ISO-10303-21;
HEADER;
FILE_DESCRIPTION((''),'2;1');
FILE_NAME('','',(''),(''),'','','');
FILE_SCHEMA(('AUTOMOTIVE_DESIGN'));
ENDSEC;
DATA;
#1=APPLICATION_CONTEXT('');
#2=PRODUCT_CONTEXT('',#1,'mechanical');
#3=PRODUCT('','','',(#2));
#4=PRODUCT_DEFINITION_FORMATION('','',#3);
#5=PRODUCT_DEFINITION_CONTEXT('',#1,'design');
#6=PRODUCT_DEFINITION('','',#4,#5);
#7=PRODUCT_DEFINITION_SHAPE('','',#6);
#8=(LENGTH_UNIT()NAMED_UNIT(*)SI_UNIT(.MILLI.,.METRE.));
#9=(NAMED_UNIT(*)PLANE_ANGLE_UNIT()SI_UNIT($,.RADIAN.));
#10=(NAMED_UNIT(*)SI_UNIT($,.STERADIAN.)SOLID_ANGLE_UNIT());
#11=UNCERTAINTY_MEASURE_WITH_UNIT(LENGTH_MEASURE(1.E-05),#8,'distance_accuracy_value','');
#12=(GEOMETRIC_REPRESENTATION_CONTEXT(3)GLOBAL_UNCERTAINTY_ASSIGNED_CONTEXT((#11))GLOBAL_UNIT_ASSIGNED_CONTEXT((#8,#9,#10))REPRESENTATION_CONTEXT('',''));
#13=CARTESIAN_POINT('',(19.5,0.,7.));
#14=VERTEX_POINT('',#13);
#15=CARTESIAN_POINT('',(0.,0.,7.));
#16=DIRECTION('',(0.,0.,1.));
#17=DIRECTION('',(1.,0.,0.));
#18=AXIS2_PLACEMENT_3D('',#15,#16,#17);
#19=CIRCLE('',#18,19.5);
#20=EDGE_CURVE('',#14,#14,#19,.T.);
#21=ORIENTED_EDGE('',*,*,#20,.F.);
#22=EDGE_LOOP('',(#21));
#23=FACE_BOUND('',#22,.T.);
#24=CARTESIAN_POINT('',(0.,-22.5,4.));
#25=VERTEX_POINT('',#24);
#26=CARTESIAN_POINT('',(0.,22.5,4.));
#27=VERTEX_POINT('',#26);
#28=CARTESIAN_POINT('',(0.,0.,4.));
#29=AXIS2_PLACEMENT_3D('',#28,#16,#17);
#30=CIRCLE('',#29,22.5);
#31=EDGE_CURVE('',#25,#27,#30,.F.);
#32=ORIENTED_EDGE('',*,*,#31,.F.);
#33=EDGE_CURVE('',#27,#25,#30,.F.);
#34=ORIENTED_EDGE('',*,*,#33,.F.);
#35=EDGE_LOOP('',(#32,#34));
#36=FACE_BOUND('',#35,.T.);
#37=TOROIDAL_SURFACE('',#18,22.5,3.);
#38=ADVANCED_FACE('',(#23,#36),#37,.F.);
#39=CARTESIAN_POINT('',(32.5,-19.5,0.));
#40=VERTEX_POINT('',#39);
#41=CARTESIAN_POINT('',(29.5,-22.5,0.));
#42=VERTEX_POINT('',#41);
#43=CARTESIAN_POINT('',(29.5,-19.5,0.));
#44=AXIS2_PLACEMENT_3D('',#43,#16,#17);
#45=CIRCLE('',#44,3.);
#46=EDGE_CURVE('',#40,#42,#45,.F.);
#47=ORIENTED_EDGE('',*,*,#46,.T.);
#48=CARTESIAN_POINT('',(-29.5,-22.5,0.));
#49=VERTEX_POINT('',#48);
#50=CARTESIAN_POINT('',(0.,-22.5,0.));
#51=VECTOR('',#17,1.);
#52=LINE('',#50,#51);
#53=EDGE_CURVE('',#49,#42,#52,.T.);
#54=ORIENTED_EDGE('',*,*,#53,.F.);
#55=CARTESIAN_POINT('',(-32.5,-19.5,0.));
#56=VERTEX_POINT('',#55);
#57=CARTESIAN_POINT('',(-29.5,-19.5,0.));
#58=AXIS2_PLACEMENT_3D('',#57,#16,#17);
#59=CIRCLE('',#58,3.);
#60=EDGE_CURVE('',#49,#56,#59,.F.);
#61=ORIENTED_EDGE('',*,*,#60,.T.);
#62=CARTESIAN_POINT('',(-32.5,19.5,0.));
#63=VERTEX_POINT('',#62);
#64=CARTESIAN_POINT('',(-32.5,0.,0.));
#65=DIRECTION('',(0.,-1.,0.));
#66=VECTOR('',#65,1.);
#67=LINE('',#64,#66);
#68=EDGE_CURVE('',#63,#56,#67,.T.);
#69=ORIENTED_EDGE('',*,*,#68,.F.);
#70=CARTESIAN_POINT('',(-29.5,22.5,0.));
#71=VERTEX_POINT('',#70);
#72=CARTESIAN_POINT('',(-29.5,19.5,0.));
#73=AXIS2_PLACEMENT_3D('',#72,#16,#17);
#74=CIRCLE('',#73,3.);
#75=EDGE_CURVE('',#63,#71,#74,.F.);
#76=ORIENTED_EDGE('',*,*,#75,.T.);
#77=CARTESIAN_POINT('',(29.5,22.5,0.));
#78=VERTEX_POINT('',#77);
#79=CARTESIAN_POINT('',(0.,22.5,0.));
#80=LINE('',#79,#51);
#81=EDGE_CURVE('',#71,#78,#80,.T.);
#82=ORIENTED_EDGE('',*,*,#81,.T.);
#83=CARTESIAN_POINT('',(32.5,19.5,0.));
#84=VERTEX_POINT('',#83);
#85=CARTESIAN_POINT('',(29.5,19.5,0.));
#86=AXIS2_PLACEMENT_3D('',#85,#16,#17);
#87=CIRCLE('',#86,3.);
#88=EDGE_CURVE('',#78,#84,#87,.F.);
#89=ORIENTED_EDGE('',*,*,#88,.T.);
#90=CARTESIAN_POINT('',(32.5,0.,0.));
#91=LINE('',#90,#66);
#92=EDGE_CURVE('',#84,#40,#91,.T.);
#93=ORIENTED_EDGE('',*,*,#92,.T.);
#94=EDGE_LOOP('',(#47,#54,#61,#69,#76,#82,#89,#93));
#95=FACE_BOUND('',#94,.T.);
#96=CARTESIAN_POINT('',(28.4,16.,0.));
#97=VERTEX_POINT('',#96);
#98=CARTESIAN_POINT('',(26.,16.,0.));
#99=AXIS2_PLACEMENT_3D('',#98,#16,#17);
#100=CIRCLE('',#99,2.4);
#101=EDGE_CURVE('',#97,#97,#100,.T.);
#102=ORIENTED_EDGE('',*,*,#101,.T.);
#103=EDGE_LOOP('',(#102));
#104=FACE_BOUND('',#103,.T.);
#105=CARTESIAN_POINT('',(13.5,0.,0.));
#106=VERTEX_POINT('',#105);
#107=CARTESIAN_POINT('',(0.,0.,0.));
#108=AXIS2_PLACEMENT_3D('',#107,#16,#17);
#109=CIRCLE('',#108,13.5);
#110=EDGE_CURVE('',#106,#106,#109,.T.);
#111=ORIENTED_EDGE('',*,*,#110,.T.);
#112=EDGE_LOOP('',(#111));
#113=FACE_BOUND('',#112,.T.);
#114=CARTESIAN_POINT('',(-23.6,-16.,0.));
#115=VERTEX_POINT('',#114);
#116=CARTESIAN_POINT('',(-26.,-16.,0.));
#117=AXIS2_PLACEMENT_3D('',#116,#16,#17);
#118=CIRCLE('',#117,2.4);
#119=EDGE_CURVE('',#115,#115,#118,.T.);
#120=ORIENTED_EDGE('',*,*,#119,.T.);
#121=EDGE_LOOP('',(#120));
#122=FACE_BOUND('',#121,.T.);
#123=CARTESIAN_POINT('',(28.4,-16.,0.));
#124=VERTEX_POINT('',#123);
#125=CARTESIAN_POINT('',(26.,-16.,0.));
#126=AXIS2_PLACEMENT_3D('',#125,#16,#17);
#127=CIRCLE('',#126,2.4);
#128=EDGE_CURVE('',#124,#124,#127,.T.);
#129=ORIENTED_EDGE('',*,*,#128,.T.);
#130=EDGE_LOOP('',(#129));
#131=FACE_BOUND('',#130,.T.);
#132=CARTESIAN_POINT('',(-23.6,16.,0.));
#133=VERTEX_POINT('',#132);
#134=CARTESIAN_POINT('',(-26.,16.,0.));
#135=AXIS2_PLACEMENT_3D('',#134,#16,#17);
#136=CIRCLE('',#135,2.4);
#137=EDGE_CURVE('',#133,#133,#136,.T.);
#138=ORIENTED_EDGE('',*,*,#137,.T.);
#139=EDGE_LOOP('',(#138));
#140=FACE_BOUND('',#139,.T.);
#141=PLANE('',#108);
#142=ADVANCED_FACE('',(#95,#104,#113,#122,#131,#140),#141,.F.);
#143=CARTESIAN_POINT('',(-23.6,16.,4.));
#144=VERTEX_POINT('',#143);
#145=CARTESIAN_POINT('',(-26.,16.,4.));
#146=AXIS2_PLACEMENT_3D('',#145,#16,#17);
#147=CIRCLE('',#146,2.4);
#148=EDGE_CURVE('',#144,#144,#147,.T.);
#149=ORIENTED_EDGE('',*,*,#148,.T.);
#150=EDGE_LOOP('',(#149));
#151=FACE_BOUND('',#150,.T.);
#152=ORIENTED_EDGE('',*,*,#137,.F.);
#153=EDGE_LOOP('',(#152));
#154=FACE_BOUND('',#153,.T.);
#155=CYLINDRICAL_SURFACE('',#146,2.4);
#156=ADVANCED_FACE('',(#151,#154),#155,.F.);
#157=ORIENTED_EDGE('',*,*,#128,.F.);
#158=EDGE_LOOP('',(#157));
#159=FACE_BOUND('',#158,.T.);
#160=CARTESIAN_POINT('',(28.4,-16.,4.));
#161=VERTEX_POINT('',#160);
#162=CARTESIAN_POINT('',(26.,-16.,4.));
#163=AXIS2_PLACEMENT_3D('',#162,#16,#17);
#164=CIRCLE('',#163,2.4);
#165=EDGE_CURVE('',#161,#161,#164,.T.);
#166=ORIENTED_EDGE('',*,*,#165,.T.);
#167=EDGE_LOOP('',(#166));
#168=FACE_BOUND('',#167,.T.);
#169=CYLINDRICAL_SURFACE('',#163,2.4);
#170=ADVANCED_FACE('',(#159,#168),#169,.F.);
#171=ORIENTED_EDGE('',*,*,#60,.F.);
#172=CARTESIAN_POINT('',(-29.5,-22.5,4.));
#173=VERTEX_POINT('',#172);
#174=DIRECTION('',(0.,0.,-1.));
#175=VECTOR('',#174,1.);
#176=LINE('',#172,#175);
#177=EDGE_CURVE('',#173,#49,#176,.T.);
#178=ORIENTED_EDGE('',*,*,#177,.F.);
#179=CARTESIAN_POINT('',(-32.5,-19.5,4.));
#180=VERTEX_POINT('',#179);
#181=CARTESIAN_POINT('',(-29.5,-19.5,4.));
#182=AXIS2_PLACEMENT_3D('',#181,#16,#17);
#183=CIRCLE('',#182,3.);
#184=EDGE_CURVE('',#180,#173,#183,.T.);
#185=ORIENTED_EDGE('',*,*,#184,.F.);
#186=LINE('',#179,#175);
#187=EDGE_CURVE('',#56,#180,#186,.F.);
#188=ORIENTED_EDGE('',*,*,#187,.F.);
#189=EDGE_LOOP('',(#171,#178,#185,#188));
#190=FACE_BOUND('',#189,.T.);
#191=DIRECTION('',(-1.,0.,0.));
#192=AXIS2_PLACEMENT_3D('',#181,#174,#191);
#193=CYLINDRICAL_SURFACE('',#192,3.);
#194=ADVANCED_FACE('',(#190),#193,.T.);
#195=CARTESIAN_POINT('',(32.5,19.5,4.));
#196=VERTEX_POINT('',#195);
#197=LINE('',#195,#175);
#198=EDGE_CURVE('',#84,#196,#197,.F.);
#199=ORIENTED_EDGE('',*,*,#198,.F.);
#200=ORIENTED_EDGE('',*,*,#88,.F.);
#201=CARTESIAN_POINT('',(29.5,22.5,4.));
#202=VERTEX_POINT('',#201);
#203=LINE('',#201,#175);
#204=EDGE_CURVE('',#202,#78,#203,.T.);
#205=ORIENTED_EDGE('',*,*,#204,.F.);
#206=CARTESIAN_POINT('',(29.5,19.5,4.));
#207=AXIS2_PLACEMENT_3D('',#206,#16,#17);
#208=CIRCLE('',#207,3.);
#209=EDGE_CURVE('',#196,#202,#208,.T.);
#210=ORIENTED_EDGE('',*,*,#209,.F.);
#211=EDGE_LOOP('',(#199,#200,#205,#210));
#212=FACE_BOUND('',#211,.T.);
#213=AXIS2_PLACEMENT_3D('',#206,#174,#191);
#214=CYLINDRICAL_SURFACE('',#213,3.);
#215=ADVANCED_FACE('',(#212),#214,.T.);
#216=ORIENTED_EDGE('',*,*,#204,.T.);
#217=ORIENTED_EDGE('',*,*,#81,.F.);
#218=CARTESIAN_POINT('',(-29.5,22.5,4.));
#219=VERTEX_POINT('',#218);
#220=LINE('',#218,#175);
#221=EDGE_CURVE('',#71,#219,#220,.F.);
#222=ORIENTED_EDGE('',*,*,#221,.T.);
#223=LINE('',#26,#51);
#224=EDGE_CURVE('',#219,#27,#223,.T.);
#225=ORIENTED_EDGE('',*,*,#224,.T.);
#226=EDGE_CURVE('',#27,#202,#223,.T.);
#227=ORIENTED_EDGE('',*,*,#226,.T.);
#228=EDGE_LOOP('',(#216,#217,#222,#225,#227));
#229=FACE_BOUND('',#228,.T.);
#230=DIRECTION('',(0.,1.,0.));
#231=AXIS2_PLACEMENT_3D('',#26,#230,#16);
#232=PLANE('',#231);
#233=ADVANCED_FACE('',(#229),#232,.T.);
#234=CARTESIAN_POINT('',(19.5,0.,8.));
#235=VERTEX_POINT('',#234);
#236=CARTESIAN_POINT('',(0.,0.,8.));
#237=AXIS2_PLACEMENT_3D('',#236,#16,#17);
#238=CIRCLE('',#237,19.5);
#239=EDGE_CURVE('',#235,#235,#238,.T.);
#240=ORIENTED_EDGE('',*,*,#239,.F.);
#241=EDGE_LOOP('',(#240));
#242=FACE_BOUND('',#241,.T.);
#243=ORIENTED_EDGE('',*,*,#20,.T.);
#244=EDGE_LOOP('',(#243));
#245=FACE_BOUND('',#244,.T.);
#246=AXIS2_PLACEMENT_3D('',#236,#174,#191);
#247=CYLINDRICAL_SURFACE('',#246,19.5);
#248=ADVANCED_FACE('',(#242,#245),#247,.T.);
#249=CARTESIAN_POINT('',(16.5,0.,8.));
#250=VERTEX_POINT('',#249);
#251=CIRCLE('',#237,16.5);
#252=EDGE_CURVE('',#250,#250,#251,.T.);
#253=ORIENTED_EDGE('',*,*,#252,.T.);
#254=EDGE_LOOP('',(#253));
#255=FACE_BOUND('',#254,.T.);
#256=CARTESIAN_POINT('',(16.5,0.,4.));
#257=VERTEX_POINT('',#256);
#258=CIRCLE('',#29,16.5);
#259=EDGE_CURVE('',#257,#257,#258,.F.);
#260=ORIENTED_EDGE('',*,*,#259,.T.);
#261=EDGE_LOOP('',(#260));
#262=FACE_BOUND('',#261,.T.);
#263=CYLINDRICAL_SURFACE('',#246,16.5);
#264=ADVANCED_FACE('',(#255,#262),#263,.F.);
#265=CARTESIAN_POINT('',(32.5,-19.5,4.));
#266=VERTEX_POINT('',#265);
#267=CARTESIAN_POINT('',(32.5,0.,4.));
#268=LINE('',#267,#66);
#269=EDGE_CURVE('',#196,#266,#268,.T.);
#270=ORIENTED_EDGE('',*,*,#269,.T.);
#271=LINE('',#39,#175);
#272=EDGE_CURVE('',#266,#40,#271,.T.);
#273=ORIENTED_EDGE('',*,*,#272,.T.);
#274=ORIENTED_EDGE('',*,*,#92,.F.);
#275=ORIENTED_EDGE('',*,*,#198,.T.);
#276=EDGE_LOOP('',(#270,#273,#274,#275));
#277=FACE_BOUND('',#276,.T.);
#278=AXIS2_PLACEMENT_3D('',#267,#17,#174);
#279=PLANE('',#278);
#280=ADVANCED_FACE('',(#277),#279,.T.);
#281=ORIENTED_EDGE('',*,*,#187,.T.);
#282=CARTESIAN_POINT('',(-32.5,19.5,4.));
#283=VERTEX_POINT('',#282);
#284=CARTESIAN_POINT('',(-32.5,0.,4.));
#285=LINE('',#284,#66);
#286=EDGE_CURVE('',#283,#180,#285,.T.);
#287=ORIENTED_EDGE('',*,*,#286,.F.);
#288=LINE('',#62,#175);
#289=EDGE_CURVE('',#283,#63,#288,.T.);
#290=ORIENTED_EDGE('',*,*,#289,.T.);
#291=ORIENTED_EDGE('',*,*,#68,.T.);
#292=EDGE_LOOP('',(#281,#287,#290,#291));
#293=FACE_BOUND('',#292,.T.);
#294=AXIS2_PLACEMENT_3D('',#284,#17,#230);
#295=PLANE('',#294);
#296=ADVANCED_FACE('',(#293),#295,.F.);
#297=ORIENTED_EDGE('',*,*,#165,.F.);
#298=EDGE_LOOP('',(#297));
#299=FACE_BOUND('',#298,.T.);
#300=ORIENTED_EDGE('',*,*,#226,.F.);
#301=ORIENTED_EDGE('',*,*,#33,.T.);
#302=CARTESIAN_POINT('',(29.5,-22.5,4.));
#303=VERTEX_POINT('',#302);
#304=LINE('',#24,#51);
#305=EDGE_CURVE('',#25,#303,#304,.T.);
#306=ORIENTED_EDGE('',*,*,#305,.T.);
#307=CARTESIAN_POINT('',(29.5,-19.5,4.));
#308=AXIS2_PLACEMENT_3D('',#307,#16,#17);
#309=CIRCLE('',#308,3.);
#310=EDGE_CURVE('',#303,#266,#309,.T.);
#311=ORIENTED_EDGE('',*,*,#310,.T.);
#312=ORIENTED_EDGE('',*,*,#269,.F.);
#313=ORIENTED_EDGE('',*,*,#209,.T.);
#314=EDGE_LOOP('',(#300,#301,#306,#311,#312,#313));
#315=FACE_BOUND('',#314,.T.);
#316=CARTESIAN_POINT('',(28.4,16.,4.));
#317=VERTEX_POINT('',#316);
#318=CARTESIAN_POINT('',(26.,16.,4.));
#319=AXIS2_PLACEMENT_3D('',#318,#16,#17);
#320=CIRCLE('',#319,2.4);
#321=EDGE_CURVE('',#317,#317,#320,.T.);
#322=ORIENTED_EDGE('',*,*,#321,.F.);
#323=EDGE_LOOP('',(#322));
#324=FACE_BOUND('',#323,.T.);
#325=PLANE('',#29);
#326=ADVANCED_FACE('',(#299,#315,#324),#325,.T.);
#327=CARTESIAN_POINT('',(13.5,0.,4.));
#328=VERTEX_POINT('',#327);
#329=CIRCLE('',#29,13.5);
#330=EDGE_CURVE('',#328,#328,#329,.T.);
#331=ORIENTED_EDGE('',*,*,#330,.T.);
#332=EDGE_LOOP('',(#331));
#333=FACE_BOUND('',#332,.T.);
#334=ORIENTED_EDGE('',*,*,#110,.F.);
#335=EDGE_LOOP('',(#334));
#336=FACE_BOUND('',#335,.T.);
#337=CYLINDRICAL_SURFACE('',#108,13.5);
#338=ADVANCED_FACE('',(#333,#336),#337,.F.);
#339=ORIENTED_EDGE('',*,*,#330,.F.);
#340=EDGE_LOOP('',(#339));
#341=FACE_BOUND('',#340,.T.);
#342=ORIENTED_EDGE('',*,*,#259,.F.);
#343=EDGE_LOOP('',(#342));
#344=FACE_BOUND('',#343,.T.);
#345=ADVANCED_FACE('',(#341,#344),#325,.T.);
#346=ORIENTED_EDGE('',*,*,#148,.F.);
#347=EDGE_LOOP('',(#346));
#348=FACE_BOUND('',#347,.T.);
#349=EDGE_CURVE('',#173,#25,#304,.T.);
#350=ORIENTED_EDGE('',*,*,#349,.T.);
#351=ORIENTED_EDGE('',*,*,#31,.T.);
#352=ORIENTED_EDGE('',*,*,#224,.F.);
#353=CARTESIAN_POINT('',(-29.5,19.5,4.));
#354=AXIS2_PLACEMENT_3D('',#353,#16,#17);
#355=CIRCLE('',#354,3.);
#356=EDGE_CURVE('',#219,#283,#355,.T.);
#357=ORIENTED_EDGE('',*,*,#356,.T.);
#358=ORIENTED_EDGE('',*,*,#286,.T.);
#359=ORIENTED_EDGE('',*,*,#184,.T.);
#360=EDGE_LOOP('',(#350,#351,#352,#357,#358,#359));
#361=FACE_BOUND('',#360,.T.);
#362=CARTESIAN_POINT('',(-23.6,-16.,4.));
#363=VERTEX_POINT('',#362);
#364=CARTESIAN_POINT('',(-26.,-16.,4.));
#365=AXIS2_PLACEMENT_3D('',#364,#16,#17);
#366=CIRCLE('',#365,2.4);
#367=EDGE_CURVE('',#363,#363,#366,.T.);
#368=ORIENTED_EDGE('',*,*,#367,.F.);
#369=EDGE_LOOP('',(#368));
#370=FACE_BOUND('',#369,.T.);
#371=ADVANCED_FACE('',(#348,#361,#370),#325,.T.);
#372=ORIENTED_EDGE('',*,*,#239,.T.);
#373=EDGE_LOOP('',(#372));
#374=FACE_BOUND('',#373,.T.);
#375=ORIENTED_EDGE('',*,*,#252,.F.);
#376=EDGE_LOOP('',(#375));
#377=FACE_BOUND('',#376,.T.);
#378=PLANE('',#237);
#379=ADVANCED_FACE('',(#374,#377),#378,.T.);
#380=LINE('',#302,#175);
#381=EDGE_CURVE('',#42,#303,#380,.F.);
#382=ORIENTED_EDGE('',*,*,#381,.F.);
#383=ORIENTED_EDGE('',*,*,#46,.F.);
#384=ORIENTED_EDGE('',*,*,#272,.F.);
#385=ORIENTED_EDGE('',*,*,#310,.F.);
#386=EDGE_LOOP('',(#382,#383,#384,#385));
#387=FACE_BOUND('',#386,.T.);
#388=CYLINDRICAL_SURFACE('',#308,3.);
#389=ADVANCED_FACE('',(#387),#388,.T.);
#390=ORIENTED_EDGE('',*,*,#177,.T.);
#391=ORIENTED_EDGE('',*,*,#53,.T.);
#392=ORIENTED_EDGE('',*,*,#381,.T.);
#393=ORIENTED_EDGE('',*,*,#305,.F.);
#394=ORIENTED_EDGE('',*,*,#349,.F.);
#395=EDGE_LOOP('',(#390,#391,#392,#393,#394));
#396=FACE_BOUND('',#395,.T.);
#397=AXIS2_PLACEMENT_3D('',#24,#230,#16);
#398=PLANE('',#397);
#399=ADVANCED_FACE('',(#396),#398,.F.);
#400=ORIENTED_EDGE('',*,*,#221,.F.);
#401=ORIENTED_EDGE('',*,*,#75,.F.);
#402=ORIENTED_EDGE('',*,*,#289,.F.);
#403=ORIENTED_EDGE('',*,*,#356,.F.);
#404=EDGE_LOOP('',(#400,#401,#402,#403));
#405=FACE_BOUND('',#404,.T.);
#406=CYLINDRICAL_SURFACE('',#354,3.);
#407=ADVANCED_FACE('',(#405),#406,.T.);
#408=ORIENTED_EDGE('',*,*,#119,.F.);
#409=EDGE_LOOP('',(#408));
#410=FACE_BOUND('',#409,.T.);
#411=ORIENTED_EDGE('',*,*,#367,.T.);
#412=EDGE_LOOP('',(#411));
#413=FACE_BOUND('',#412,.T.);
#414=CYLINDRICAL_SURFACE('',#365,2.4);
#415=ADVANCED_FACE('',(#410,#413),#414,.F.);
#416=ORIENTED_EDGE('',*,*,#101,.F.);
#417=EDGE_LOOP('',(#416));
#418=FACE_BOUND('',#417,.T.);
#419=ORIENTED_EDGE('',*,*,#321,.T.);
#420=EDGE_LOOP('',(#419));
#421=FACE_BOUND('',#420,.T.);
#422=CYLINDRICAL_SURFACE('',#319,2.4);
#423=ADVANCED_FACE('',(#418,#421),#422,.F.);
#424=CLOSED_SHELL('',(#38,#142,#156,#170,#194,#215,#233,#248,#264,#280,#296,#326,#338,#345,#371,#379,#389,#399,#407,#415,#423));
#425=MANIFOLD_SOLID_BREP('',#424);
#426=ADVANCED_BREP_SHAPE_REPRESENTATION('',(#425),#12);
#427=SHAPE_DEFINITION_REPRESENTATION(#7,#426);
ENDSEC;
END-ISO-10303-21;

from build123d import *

# Parameters (mm, degrees)
SKETCH1_W            = 65
SKETCH1_H            = 45
SKETCH1_R            = 2
BOSS_EXTRUDE1_DEPTH  = 4
SKETCH4_R            = 19.5
SKETCH4_R_2          = 16.5
BOSS_EXTRUDE3_DEPTH  = 4
SKETCH5_R            = 13.5
CUT_EXTRUDE2_DEPTH   = 40.730341051
M4_CLEARANCE_HOLE1_D = 4.8
FILLET1_R            = 3


with BuildPart() as part:
    # Sketch1 → Boss-Extrude1 (new body)
    # profile 1 of 5: a face of its own
    with BuildSketch(Plane.XY):
        Rectangle(SKETCH1_W, SKETCH1_H)
        with Locations((26, 16)):
            Circle(SKETCH1_R, mode=Mode.SUBTRACT)
        with Locations((26, -16)):
            Circle(SKETCH1_R, mode=Mode.SUBTRACT)
        with Locations((-26, -16)):
            Circle(SKETCH1_R, mode=Mode.SUBTRACT)
        with Locations((-26, 16)):
            Circle(SKETCH1_R, mode=Mode.SUBTRACT)
    # profile 2 of 5: a face of its own
    with BuildSketch(Plane.XY):
        with Locations((-26, 16)):
            Circle(SKETCH1_R)
    # profile 3 of 5: a face of its own
    with BuildSketch(Plane.XY):
        with Locations((-26, -16)):
            Circle(SKETCH1_R)
    # profile 4 of 5: a face of its own
    with BuildSketch(Plane.XY):
        with Locations((26, -16)):
            Circle(SKETCH1_R)
    # profile 5 of 5: a face of its own
    with BuildSketch(Plane.XY):
        with Locations((26, 16)):
            Circle(SKETCH1_R)
    extrude(amount=BOSS_EXTRUDE1_DEPTH)

    # Sketch4 → Boss-Extrude3 (add)
    with BuildSketch(Plane.XY.offset(4)):
        Circle(SKETCH4_R)
        Circle(SKETCH4_R_2, mode=Mode.SUBTRACT)
    extrude(amount=BOSS_EXTRUDE3_DEPTH)

    # Sketch5 → Cut-Extrude2 (cut, through all)
    with BuildSketch(Plane.XY.offset(4)):
        Circle(SKETCH5_R)
    extrude(amount=-CUT_EXTRUDE2_DEPTH, mode=Mode.SUBTRACT)

    # M4 Clearance Hole1 (through all)
    with Locations(Plane.XY.offset(4)):
        with Locations((26, 16), (26, -16), (-26, -16), (-26, 16)):
            Hole(M4_CLEARANCE_HOLE1_D / 2)

    # Fillet1
    fillet1_edges = [part.edges().sort_by_distance(p)[0] for p in [
        (-19.5, 0, 4),
        (32.5, -22.5, 2),
        (-32.5, -22.5, 2),
        (-32.5, 22.5, 2),
        (32.5, 22.5, 2),
    ]]
    fillet(fillet1_edges, radius=FILLET1_R - 0.0001)  # a hair under: the kernel refuses the full size


solid = part.part
